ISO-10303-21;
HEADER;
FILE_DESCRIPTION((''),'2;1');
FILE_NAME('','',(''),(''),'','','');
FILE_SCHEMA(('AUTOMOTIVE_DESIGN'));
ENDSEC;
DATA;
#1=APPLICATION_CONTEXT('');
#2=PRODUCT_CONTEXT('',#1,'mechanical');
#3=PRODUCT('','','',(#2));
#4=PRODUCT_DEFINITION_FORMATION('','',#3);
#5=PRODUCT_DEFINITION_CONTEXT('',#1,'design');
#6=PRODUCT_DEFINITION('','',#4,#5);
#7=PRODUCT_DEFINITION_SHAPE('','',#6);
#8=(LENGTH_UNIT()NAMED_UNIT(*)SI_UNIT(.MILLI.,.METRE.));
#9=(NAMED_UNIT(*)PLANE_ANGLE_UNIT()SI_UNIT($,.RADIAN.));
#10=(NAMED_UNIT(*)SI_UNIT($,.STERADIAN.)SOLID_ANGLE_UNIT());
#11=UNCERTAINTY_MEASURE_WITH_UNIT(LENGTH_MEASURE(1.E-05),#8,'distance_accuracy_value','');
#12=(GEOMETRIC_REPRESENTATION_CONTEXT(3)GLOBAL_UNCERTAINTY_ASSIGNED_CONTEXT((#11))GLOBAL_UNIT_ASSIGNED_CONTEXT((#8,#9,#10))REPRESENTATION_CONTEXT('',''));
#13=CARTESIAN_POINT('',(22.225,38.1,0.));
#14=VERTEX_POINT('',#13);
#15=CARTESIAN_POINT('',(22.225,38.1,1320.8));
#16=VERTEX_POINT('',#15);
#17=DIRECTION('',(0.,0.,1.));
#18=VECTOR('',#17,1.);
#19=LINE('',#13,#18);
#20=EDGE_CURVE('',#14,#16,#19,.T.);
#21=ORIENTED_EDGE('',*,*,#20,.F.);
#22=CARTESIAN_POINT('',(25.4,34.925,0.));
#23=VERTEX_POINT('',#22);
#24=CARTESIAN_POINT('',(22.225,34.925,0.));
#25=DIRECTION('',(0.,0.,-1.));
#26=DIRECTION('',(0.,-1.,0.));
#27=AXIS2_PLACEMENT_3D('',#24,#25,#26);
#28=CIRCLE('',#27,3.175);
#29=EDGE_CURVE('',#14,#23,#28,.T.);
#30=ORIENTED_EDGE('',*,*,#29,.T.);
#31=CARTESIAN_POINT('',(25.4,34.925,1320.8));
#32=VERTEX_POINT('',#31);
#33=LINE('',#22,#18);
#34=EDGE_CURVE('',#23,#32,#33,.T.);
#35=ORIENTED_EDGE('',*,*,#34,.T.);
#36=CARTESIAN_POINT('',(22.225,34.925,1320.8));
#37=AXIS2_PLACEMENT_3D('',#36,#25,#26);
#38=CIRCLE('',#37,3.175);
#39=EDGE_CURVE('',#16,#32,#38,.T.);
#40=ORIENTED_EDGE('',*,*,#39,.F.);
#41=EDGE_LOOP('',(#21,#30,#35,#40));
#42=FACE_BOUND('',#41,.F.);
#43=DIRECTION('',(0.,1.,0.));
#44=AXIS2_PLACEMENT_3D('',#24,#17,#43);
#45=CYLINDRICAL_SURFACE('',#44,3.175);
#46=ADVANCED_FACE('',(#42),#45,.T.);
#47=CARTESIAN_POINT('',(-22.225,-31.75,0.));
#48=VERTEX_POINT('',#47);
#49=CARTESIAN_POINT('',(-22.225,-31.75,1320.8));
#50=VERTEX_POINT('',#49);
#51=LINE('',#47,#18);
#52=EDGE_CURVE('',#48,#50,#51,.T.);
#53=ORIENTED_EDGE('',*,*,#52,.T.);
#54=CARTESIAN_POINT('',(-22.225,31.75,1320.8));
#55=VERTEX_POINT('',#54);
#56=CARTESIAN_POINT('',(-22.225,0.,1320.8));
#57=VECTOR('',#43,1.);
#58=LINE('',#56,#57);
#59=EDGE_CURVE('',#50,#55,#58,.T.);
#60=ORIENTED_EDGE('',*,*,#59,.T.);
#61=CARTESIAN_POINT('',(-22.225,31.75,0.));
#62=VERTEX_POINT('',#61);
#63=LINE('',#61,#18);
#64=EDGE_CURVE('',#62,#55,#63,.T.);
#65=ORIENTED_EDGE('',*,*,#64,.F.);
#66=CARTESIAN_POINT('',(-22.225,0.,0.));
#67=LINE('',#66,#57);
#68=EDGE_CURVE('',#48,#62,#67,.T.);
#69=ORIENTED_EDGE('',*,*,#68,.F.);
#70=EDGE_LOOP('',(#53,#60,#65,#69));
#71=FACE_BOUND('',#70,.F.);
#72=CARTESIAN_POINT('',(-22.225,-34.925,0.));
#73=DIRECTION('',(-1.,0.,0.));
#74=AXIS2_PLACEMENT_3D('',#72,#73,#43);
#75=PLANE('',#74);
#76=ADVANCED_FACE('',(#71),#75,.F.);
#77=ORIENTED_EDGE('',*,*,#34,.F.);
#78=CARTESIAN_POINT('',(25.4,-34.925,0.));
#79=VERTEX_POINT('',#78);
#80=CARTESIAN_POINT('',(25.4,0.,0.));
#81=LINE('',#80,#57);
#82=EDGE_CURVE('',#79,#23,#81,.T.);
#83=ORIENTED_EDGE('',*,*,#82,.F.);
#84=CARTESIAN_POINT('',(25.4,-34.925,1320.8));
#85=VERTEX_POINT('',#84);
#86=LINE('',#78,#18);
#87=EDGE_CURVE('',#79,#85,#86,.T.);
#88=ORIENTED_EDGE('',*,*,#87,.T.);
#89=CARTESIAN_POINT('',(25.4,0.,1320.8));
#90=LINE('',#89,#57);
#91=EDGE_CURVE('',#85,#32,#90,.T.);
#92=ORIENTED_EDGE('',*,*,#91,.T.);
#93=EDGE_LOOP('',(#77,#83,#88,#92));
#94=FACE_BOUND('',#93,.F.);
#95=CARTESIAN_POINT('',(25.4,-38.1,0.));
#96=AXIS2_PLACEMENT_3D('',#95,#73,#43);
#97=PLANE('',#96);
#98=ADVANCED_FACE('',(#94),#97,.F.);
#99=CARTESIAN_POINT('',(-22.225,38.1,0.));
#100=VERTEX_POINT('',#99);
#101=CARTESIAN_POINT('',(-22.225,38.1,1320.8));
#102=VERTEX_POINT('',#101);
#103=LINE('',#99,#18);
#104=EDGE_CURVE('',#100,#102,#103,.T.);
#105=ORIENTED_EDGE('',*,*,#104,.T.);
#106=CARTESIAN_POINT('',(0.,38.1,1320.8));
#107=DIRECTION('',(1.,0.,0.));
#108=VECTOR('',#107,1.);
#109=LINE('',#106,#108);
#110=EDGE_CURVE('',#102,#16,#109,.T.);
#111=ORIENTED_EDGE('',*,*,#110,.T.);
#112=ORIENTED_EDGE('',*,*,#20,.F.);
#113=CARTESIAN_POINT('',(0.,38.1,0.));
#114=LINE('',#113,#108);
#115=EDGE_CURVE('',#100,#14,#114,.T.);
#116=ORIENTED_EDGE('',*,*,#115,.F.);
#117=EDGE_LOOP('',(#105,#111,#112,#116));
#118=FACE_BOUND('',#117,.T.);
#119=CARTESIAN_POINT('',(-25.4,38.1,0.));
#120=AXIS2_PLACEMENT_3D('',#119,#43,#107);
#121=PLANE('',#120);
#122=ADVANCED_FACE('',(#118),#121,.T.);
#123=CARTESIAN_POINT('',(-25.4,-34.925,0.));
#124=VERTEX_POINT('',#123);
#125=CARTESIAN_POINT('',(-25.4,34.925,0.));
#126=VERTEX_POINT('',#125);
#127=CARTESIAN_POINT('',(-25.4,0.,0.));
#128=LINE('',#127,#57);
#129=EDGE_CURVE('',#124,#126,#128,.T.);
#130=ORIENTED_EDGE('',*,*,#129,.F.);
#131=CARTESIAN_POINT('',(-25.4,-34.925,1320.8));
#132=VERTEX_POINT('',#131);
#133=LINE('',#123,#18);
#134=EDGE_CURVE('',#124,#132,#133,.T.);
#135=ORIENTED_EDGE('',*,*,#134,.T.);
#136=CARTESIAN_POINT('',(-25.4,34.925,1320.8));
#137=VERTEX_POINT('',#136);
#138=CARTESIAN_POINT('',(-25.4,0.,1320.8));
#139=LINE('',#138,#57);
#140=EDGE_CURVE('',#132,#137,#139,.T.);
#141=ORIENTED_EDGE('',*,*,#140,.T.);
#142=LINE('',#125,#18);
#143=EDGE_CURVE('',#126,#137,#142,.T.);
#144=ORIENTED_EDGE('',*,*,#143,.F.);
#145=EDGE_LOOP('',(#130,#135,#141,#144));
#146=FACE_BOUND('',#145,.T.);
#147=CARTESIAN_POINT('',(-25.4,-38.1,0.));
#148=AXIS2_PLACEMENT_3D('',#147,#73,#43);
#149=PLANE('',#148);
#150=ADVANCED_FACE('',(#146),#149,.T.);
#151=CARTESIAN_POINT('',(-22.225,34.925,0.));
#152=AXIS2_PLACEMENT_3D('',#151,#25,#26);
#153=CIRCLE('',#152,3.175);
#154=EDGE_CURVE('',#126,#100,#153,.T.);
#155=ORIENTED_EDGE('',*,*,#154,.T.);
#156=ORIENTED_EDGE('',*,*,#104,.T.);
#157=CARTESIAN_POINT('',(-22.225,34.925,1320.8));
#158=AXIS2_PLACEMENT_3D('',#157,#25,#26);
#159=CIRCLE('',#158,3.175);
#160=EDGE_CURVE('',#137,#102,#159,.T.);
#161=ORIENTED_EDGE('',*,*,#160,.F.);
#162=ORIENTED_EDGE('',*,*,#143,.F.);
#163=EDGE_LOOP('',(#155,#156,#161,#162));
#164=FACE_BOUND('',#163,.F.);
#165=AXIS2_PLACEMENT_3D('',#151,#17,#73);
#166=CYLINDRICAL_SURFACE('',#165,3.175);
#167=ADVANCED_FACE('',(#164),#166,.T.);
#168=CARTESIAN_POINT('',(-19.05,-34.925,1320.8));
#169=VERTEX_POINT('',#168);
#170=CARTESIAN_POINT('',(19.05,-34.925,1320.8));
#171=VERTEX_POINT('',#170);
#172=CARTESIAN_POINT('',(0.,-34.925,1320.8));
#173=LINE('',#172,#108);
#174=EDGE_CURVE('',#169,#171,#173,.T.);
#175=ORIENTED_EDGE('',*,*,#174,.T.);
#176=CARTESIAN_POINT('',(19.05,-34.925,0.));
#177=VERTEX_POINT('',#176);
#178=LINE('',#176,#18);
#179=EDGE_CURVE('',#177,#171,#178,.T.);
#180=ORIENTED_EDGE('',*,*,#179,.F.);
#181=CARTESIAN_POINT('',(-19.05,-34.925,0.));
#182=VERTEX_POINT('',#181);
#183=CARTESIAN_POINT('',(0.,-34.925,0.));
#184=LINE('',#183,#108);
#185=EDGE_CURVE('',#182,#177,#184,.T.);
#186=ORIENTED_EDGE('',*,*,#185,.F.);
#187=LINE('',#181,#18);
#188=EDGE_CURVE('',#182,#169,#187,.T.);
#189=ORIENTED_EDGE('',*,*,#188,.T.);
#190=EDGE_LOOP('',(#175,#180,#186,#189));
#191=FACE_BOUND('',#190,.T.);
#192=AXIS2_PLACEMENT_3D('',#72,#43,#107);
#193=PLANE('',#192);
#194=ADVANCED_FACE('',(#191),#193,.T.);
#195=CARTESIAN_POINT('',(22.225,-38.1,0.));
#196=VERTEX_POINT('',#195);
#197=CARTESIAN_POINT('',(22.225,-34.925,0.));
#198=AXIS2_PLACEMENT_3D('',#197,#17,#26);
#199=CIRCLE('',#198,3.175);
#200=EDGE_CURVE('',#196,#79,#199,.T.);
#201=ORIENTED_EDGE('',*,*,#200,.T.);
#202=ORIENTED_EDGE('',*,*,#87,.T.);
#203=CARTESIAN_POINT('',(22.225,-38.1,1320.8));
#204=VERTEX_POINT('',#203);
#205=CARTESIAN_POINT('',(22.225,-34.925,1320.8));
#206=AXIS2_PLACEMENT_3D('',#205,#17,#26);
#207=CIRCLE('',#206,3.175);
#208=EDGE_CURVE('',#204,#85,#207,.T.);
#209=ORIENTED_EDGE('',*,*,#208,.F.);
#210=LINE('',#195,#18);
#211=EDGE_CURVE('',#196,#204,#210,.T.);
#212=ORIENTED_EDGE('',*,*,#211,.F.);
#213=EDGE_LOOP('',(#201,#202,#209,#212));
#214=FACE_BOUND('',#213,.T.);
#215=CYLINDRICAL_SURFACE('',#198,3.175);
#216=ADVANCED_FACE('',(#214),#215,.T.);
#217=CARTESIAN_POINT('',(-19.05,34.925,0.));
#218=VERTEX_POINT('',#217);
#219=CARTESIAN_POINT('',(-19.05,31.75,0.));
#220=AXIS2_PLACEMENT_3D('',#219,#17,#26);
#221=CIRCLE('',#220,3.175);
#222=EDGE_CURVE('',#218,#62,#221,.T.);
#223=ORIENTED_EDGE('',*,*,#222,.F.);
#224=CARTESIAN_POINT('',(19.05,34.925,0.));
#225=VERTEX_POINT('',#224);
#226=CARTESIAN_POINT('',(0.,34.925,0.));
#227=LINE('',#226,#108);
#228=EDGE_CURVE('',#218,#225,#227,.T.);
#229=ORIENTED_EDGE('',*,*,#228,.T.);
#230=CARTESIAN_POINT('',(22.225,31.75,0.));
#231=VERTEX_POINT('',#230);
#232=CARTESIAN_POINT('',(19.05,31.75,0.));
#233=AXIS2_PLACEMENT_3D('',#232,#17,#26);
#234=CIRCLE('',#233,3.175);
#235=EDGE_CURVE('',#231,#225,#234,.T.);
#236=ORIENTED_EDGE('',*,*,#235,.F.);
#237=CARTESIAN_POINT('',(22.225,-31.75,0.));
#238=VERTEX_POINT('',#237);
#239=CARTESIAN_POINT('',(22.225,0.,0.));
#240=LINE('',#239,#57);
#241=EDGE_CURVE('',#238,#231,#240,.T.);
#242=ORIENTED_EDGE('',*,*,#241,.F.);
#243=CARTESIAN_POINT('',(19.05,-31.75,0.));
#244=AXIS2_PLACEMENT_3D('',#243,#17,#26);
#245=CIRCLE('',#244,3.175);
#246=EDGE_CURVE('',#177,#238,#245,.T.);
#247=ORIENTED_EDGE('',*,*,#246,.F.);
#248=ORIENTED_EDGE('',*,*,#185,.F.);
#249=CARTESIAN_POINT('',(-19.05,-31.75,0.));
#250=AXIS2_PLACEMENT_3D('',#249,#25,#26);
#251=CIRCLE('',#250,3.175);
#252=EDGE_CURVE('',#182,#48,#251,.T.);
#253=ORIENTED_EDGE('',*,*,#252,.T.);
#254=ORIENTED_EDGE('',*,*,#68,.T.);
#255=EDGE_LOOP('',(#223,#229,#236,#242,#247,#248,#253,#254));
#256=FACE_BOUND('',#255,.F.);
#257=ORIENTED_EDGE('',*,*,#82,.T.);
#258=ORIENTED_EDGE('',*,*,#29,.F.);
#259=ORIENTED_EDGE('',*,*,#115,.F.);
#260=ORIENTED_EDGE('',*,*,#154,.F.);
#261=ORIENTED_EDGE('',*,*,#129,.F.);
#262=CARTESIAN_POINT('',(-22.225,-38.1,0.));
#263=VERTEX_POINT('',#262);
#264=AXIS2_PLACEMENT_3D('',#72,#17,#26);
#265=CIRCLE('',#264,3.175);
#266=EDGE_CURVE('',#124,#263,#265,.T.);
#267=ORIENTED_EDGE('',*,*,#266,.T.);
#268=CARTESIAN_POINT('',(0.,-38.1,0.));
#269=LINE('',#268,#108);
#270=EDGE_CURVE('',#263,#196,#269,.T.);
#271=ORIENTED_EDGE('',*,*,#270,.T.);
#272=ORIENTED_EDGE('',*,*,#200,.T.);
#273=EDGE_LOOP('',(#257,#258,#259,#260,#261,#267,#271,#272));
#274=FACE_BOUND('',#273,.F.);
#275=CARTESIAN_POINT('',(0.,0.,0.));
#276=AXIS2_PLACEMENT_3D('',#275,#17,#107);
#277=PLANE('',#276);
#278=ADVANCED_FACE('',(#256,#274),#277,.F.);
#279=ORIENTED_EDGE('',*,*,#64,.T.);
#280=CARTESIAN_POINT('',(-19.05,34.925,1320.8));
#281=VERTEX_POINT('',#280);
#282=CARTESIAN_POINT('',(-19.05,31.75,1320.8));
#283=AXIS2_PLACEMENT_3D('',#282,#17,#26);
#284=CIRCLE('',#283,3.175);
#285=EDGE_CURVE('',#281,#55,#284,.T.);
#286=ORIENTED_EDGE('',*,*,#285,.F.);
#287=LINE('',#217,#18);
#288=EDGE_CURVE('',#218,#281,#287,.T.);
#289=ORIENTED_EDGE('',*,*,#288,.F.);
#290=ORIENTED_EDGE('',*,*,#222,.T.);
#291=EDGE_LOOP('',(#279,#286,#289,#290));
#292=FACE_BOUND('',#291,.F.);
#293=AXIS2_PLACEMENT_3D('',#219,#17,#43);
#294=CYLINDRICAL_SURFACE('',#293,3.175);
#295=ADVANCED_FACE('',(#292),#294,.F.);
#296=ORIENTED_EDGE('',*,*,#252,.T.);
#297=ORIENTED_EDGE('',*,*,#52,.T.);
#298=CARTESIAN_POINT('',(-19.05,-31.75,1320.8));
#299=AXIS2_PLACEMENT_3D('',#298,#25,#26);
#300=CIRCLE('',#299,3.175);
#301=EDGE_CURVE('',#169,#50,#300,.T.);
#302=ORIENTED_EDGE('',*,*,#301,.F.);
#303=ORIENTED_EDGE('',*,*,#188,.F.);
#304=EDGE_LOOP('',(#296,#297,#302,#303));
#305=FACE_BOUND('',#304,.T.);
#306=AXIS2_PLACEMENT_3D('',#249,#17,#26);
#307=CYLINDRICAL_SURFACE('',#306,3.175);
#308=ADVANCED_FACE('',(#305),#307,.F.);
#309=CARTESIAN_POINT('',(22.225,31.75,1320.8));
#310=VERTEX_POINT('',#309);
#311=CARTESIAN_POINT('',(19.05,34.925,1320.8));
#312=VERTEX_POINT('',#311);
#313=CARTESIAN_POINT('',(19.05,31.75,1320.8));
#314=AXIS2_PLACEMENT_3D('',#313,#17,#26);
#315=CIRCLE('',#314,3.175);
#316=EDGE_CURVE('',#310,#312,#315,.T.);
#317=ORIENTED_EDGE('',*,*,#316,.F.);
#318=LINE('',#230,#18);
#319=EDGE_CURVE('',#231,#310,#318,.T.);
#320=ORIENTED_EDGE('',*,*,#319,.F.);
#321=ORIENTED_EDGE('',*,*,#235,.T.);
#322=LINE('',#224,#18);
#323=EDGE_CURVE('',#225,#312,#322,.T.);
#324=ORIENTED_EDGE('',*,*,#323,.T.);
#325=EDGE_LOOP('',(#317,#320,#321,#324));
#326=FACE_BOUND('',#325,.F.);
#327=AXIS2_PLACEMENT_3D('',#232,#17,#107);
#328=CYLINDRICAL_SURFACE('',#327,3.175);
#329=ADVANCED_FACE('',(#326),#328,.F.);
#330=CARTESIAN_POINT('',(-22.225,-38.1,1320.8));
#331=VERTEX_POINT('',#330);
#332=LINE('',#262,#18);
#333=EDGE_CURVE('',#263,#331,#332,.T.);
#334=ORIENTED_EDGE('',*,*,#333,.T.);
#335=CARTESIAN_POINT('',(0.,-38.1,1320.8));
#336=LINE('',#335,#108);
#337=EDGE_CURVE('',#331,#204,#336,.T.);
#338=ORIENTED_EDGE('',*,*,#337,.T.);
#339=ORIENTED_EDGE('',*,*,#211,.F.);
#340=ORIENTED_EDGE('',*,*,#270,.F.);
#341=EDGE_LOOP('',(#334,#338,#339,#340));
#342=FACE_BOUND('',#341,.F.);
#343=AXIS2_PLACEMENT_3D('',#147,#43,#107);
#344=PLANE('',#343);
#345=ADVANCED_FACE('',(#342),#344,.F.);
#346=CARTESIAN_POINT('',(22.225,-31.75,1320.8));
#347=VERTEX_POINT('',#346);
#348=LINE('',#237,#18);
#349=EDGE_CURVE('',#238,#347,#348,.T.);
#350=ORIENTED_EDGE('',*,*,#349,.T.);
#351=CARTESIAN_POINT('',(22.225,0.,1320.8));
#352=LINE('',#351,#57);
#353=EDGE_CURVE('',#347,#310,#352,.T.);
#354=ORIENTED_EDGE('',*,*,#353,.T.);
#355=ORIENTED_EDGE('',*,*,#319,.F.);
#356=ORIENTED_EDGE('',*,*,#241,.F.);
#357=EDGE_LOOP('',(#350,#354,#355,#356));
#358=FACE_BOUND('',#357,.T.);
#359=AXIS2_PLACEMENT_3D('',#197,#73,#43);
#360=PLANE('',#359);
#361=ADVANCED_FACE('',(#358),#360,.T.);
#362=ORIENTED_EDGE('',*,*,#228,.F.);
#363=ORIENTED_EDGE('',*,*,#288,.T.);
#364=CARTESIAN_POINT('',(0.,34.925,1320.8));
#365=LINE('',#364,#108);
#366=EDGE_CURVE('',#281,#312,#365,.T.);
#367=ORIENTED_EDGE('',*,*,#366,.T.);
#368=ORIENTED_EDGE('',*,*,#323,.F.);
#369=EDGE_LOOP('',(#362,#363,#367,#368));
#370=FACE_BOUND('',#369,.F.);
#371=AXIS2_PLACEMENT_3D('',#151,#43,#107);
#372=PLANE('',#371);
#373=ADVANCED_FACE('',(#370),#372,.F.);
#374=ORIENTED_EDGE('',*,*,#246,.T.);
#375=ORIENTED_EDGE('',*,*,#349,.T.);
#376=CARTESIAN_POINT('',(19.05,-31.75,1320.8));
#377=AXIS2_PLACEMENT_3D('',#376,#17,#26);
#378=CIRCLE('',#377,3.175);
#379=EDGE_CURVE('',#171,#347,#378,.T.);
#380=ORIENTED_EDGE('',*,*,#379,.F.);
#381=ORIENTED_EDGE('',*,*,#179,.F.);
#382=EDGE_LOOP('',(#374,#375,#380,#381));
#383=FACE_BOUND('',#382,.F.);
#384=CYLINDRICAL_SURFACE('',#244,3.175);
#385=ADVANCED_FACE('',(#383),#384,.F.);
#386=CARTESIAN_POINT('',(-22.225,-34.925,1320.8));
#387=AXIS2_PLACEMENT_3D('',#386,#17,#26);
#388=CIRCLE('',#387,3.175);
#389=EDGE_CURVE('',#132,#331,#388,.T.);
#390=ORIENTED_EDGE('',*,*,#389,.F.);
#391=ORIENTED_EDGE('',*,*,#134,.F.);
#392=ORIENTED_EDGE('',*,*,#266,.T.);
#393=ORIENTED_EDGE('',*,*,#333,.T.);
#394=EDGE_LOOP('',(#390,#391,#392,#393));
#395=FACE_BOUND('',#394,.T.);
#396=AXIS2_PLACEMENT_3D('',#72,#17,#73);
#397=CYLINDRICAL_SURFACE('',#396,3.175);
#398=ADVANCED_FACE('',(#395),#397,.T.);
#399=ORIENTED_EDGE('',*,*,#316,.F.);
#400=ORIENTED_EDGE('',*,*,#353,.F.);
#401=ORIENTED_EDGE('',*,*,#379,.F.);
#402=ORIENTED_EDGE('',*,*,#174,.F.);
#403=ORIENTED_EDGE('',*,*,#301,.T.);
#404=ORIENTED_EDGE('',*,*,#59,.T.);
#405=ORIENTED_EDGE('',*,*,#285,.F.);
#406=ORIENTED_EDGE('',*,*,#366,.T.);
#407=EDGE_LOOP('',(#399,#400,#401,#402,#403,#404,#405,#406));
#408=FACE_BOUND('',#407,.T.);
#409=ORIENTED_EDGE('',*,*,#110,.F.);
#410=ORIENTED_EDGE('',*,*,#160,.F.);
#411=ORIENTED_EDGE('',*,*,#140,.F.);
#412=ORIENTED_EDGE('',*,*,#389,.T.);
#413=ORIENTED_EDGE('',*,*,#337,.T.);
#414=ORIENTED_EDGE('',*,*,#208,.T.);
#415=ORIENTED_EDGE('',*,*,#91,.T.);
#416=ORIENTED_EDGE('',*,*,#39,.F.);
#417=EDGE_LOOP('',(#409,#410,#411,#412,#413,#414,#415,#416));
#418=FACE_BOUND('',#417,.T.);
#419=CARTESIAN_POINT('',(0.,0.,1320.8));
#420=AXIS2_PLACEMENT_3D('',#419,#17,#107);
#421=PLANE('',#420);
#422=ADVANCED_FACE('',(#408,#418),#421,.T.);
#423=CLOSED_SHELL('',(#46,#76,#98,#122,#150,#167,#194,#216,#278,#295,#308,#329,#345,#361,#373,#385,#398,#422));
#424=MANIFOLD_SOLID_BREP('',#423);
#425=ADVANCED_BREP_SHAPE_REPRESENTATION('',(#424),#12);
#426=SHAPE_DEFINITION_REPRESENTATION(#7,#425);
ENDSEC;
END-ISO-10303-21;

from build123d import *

# Parameters (mm, degrees)
F0_W     = 50.8
F0_H     = 76.2
F0_W_2   = 44.45
F0_H_2   = 69.85
F2_DEPTH = 1320.8
F3_R     = 3.175


# Not quite as in the source:
# - a variable given as a bare number and used for a length is read in inches; the dataset says mm whatever the document's units were


with BuildPart() as f2:
    # F0 (on Top) → F2 (new body)
    with BuildSketch(Plane.XY):
        Rectangle(F0_W, F0_H)
        Rectangle(F0_W_2, F0_H_2, mode=Mode.SUBTRACT)
    extrude(amount=F2_DEPTH)

    # F3
    f3_edges = [f2.edges().sort_by_distance(p)[0] for p in [
        (25.4, 38.1, 660.4),
        (-25.4, 38.1, 660.4),
        (25.4, -38.1, 660.4),
        (22.225, -34.925, 660.4),
        (-22.225, -34.925, 660.4),
        (-22.225, 34.925, 660.4),
        (22.225, 34.925, 660.4),
        (-25.4, -38.1, 660.4),
    ]]
    fillet(f3_edges, radius=F3_R)


solid = f2.part
